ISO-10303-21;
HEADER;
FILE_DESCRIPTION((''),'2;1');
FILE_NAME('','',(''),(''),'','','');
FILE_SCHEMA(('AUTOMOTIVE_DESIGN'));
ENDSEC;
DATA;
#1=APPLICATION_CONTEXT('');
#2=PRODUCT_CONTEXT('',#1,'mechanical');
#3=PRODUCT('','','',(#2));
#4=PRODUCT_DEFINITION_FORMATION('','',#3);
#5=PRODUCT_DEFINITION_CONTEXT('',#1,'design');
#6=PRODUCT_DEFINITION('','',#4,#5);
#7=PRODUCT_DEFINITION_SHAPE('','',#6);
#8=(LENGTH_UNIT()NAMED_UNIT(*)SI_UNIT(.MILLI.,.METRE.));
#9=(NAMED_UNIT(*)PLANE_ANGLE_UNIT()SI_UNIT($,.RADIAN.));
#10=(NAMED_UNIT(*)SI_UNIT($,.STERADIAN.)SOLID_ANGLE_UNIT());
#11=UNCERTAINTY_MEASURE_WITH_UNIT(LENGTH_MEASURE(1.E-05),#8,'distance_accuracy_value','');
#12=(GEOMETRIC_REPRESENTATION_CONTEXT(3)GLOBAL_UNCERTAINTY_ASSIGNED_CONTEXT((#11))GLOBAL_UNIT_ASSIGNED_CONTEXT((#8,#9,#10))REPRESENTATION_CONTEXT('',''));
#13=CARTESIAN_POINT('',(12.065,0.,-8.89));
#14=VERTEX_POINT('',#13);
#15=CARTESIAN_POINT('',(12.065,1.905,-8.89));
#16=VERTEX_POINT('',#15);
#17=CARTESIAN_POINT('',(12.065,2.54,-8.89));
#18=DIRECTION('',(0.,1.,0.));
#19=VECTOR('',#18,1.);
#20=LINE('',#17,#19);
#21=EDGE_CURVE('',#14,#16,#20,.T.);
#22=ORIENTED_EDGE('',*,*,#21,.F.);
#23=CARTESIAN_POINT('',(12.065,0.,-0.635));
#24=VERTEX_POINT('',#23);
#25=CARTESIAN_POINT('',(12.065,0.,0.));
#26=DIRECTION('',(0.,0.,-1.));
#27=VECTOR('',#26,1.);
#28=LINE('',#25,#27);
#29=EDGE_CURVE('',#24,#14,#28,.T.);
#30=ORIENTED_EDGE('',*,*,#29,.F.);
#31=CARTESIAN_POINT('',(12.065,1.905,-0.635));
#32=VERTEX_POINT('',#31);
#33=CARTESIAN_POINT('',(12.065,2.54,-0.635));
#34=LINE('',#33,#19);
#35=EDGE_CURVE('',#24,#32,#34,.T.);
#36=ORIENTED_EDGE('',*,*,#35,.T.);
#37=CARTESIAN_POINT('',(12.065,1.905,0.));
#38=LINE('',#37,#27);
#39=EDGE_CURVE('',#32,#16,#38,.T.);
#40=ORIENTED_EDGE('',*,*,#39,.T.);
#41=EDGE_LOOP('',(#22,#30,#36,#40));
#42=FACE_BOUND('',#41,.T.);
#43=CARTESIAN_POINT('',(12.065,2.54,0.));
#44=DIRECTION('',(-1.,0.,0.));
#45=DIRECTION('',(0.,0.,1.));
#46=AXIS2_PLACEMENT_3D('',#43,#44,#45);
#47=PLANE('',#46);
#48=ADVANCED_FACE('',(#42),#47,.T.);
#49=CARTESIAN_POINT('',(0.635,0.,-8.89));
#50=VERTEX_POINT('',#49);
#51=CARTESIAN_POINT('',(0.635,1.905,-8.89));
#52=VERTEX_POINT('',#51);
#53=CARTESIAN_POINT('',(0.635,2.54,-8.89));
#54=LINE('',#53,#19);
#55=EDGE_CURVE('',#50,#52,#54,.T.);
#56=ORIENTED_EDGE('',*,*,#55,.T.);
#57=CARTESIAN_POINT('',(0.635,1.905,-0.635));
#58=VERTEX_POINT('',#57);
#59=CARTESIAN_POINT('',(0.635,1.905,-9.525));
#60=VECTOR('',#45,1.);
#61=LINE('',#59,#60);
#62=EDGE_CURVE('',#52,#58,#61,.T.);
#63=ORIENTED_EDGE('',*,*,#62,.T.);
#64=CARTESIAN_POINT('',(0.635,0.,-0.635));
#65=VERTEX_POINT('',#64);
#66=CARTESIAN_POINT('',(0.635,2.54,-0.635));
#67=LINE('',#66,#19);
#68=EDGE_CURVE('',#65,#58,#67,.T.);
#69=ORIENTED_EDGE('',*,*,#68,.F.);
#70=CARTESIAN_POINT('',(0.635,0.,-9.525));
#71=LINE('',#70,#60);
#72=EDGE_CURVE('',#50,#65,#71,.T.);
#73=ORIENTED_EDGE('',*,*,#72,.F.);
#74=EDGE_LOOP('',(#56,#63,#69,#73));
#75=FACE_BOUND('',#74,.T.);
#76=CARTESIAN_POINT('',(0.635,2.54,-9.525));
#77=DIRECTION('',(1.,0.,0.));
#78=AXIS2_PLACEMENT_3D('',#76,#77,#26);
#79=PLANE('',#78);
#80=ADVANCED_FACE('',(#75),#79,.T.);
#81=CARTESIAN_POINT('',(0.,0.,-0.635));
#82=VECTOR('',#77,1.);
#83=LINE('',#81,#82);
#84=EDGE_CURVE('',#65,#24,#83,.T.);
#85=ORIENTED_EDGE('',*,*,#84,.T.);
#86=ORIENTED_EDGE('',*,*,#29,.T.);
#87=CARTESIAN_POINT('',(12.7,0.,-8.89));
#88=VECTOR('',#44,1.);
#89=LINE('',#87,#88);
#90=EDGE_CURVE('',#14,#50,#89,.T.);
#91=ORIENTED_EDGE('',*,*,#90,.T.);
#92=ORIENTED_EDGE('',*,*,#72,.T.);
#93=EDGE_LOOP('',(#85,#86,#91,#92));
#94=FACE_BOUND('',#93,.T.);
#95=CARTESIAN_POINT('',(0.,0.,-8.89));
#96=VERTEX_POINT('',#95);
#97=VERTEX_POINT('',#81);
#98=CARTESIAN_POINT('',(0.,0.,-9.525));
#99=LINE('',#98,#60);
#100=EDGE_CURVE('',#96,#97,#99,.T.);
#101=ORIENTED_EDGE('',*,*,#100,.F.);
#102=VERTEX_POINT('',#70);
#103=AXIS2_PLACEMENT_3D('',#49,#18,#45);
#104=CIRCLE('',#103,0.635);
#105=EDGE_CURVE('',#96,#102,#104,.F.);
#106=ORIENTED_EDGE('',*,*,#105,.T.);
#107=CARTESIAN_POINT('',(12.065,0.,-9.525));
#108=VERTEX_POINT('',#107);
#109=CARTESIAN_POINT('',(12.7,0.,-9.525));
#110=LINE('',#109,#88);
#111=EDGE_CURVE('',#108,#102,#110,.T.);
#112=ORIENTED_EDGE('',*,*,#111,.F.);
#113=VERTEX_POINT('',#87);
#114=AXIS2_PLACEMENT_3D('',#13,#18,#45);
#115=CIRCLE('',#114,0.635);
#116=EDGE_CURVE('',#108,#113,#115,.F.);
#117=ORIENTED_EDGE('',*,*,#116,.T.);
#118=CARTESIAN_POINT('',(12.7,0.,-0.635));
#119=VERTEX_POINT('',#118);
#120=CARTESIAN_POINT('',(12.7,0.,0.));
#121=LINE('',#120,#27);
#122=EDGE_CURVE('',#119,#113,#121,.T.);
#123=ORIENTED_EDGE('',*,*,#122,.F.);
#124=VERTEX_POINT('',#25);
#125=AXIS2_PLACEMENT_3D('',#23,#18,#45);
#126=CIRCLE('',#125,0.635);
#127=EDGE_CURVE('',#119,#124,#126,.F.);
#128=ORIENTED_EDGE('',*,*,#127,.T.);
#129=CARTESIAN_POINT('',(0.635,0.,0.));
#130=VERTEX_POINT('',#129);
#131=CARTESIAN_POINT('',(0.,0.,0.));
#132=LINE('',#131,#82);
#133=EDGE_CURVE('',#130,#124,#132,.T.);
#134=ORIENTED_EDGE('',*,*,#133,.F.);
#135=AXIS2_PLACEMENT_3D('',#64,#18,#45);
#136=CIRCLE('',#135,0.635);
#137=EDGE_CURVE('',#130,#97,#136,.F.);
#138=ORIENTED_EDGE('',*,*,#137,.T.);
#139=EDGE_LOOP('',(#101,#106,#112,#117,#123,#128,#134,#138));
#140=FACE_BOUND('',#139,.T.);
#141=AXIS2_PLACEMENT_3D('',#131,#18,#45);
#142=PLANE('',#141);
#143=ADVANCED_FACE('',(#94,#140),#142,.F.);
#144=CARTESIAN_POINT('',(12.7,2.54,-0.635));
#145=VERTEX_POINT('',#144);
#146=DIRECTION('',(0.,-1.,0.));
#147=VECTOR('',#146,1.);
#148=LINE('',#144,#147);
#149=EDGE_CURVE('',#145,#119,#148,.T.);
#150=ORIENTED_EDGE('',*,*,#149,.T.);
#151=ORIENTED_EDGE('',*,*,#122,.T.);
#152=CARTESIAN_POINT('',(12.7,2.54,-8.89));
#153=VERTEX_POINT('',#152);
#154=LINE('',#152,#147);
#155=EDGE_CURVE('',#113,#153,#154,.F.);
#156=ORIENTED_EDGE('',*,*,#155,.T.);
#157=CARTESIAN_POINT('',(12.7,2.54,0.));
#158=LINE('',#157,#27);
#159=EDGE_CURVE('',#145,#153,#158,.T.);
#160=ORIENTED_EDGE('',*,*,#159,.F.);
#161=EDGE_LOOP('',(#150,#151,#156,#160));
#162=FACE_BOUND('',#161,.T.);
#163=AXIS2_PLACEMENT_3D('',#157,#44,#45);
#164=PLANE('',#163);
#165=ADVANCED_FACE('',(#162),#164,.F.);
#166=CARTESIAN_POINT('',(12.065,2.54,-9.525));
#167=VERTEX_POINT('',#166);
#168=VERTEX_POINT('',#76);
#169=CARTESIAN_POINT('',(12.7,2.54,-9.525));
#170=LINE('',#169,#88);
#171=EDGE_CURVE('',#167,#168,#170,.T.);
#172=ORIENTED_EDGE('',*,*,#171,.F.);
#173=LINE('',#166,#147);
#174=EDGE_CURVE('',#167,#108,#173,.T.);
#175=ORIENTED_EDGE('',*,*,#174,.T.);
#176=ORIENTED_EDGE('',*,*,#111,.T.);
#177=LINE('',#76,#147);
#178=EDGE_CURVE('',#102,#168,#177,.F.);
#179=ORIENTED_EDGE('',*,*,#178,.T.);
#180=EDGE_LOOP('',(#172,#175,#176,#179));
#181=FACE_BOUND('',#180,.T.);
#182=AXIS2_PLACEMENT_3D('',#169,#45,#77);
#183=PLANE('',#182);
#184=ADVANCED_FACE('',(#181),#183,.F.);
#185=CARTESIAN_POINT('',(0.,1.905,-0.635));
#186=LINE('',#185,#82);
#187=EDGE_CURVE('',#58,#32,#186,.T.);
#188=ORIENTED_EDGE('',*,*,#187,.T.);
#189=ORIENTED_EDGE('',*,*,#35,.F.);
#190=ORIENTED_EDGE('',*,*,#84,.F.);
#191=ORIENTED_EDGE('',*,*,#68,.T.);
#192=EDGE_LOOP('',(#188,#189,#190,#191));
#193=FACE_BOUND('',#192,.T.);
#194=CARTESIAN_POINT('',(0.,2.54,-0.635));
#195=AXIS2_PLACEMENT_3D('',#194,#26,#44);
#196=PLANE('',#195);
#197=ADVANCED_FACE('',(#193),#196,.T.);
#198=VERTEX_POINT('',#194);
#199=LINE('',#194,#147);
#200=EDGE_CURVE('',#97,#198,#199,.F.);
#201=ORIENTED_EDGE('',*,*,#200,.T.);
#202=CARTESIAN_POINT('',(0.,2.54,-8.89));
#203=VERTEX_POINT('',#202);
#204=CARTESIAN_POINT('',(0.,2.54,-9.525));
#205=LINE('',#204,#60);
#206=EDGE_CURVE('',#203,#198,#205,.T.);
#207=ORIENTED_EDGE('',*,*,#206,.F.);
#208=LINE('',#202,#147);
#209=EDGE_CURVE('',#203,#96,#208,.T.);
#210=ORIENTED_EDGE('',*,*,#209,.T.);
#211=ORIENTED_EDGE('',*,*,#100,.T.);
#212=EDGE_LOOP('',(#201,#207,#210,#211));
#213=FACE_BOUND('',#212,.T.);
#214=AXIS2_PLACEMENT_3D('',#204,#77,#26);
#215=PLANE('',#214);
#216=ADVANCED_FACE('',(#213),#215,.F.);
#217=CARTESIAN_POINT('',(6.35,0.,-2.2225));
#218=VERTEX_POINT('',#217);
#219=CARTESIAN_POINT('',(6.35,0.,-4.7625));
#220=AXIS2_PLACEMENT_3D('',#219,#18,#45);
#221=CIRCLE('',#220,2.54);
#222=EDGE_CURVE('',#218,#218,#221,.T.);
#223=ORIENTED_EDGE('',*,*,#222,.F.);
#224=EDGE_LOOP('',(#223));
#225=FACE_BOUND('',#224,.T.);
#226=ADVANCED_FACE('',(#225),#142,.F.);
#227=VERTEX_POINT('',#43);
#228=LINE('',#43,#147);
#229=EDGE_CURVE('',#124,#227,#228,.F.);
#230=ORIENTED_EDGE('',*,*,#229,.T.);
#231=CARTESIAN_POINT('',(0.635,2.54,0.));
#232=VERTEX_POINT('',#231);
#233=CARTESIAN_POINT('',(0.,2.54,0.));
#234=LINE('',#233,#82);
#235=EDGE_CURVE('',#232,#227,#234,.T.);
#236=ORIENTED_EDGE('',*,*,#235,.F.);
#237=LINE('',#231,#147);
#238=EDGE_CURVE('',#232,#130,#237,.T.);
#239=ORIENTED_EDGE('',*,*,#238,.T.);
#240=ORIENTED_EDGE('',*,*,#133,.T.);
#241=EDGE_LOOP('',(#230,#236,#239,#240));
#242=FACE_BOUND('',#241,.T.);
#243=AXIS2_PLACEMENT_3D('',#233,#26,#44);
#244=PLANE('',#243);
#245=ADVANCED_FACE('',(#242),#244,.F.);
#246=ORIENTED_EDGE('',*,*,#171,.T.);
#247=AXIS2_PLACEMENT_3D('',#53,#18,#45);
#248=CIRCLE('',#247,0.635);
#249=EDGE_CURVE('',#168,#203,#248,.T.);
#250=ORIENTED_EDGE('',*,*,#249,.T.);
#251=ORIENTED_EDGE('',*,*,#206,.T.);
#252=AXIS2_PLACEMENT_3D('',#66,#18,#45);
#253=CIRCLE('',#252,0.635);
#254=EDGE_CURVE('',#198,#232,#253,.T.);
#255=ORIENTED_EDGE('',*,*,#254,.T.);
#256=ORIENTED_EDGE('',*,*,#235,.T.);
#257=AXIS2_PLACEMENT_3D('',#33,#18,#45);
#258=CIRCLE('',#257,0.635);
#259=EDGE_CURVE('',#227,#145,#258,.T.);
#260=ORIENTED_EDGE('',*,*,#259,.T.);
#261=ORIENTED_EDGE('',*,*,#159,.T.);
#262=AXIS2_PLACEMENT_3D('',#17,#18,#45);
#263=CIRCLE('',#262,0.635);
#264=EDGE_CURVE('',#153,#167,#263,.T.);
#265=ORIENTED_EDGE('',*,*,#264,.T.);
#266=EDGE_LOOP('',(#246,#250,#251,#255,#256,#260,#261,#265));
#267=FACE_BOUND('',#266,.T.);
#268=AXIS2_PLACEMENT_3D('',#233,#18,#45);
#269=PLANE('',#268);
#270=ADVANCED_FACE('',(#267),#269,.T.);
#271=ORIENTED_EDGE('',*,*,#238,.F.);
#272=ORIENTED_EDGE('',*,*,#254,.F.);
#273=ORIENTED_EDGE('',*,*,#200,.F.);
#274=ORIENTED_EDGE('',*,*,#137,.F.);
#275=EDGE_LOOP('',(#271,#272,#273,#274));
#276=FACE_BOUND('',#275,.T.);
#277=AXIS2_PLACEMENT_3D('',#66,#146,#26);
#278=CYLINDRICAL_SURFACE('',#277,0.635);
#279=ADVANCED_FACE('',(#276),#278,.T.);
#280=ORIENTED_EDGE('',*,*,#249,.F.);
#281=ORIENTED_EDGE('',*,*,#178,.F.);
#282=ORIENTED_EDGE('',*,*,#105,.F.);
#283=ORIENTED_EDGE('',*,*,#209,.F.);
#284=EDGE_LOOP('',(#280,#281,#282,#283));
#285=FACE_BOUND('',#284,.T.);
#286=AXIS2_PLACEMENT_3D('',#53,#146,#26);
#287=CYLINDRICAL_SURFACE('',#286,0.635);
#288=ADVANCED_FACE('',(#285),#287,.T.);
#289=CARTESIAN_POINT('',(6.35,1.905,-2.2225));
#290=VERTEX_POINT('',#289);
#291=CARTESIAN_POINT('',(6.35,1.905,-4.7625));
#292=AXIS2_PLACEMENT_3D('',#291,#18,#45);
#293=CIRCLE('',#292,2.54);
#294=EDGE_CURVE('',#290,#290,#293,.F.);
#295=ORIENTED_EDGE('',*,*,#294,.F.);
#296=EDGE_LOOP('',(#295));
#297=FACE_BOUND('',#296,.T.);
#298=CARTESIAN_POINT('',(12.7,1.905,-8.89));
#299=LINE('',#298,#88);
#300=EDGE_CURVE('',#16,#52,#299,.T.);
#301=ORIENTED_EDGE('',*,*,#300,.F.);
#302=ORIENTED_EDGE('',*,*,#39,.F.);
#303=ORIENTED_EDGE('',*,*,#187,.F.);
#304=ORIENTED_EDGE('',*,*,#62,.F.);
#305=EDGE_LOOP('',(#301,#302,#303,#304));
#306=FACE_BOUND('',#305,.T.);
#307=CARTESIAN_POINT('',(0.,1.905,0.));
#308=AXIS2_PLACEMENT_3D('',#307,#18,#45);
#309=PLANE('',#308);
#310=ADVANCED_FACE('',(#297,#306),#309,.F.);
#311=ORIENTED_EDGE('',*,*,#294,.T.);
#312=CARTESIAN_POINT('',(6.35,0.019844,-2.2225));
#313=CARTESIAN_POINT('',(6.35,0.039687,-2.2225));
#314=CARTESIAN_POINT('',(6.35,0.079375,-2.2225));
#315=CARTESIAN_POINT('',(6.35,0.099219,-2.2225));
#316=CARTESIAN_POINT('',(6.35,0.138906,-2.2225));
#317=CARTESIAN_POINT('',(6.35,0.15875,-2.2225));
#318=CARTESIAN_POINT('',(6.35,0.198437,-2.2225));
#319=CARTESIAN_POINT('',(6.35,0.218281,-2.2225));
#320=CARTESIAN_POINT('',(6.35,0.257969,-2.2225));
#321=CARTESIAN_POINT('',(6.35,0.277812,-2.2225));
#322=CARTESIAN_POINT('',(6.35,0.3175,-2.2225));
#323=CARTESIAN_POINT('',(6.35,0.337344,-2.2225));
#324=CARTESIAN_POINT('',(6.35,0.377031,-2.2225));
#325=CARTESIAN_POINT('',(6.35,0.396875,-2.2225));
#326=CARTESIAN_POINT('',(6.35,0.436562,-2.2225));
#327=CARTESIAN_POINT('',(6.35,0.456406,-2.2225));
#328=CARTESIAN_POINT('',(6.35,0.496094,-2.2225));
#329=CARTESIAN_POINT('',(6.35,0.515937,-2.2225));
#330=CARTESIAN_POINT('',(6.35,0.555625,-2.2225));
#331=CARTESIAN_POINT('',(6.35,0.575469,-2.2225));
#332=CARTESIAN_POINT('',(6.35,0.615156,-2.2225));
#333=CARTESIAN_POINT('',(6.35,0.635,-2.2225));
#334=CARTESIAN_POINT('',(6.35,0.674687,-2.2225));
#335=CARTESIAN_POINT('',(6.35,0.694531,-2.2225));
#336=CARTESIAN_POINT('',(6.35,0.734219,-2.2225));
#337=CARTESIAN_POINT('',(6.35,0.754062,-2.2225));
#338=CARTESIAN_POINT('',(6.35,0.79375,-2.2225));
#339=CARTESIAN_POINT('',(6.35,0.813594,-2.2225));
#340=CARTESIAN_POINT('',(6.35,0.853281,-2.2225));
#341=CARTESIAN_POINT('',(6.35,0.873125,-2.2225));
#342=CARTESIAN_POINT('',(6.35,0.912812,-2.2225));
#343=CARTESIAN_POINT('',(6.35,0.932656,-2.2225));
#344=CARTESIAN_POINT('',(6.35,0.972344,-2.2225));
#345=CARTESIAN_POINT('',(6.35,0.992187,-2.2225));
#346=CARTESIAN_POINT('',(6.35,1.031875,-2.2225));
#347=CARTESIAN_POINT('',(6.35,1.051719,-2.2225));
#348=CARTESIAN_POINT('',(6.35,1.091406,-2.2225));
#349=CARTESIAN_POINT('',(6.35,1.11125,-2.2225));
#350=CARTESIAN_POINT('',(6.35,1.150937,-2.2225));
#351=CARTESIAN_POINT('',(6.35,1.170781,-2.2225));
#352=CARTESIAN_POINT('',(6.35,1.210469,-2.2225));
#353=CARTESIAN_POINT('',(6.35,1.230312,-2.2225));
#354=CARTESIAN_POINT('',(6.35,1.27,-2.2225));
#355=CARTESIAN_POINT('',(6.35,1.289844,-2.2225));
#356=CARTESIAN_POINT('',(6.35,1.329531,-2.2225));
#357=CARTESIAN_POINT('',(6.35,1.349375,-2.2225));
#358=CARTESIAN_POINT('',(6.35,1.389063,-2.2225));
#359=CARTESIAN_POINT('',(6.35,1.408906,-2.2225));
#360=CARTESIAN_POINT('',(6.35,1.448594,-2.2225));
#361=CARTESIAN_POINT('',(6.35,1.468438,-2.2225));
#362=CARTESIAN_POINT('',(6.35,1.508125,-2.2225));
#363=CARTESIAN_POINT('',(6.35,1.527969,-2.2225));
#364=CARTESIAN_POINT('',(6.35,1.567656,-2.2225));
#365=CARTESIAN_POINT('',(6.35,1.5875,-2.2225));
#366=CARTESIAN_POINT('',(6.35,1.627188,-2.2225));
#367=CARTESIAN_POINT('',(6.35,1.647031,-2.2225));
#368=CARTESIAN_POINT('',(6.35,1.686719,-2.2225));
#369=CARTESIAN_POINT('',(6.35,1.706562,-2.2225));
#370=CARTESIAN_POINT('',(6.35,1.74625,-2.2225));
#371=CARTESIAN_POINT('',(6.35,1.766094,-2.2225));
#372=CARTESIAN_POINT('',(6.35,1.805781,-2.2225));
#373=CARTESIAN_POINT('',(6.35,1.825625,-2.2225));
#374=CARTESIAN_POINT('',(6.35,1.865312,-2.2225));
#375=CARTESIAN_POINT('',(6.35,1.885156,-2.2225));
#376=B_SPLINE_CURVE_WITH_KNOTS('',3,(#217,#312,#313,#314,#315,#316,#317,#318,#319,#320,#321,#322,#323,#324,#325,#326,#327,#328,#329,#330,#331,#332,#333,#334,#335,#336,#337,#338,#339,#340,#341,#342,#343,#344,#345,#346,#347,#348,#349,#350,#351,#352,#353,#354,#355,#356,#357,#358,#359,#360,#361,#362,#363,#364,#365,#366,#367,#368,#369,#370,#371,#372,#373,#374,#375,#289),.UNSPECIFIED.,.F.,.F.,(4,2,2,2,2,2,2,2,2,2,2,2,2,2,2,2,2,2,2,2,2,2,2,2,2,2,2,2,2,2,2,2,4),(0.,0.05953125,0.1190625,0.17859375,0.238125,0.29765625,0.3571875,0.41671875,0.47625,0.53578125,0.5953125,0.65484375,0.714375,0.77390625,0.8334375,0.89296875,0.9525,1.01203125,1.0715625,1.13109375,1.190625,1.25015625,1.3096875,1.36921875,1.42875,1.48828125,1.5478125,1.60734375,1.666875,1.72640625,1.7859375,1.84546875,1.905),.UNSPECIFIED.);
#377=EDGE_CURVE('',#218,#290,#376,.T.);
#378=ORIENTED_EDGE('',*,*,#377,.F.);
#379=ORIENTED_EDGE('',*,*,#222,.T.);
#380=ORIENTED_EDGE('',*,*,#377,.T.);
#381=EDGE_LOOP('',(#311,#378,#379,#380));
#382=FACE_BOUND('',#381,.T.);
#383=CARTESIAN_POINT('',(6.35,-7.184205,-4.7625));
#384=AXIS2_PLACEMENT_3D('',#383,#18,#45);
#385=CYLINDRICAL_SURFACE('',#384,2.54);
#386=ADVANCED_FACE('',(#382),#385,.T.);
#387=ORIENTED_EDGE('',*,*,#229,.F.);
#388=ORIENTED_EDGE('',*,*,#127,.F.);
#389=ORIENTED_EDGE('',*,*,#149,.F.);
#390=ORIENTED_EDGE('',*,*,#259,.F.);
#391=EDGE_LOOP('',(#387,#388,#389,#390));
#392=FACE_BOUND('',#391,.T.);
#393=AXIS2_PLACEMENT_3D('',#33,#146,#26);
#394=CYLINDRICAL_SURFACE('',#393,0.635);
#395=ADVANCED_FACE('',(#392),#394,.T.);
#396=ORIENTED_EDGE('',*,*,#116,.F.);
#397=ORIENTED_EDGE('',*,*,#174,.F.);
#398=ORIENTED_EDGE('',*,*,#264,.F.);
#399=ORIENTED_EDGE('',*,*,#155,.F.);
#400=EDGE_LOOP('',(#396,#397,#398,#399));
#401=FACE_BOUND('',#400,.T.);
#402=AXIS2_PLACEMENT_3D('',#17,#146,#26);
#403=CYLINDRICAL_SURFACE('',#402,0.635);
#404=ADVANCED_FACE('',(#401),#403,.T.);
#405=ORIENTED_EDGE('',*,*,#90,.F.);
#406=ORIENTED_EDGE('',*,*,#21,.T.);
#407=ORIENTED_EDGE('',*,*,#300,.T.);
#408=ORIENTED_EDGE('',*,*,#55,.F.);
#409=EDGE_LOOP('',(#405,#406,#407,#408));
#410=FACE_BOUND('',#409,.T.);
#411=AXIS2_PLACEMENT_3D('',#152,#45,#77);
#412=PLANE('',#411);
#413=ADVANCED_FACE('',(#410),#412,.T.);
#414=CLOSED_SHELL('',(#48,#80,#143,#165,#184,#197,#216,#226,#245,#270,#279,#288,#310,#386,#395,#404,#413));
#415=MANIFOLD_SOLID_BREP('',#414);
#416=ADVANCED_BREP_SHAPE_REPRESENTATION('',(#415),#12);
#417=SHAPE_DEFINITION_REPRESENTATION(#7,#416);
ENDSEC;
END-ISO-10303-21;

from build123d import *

# Parameters (mm, degrees)
SKETCH1_W           = 12.7
SKETCH1_H           = 9.525
BOSS_EXTRUDE1_DEPTH = 2.54
FILLET1_R           = 0.635
SHELL1_START        = 0.635
SHELL1_OUTLINE_W    = 1.905
SHELL1_OUTLINE_H    = 8.255
SHELL1_DEPTH        = 11.43
SKETCH2_R           = 2.54
BOSS_EXTRUDE2_DEPTH = 1.905


# Read off the part's stored shape, not the designer's step: Shell1
with BuildPart() as part:
    # Sketch1 → Boss-Extrude1 (new body)
    with BuildSketch(Plane(origin=(0, 0, 0), x_dir=(1, 0, 0), z_dir=(0, 1, 0))):
        with Locations((6.35, 4.7625)):
            Rectangle(SKETCH1_W, SKETCH1_H)
    extrude(amount=BOSS_EXTRUDE1_DEPTH)

    # Fillet1
    fillet1_edges = [part.edges().sort_by_distance(p)[0] for p in [
        (0, 1.27, -9.525),
        (12.7, 1.27, -9.525),
        (12.7, 1.27, 0),
        (0, 1.27, 0),
    ]]
    fillet(fillet1_edges, radius=FILLET1_R)

    # Shell1 outline → Shell1 (cut)
    with BuildSketch(Plane.YZ.offset(SHELL1_START)):
        with Locations((0.9525, -4.7625)):
            Rectangle(SHELL1_OUTLINE_W, SHELL1_OUTLINE_H)
    extrude(amount=SHELL1_DEPTH, mode=Mode.SUBTRACT)

    # Sketch2 → Boss-Extrude2 (add)
    with BuildSketch(Plane(origin=(0, 1.905, 0), x_dir=(-1, 0, 0), z_dir=(0, -1, 0))):
        with Locations(Location((-6.35, 4.7625, 0), (0, 0, 270))):
            Circle(SKETCH2_R)
    extrude(amount=BOSS_EXTRUDE2_DEPTH)


solid = part.part
